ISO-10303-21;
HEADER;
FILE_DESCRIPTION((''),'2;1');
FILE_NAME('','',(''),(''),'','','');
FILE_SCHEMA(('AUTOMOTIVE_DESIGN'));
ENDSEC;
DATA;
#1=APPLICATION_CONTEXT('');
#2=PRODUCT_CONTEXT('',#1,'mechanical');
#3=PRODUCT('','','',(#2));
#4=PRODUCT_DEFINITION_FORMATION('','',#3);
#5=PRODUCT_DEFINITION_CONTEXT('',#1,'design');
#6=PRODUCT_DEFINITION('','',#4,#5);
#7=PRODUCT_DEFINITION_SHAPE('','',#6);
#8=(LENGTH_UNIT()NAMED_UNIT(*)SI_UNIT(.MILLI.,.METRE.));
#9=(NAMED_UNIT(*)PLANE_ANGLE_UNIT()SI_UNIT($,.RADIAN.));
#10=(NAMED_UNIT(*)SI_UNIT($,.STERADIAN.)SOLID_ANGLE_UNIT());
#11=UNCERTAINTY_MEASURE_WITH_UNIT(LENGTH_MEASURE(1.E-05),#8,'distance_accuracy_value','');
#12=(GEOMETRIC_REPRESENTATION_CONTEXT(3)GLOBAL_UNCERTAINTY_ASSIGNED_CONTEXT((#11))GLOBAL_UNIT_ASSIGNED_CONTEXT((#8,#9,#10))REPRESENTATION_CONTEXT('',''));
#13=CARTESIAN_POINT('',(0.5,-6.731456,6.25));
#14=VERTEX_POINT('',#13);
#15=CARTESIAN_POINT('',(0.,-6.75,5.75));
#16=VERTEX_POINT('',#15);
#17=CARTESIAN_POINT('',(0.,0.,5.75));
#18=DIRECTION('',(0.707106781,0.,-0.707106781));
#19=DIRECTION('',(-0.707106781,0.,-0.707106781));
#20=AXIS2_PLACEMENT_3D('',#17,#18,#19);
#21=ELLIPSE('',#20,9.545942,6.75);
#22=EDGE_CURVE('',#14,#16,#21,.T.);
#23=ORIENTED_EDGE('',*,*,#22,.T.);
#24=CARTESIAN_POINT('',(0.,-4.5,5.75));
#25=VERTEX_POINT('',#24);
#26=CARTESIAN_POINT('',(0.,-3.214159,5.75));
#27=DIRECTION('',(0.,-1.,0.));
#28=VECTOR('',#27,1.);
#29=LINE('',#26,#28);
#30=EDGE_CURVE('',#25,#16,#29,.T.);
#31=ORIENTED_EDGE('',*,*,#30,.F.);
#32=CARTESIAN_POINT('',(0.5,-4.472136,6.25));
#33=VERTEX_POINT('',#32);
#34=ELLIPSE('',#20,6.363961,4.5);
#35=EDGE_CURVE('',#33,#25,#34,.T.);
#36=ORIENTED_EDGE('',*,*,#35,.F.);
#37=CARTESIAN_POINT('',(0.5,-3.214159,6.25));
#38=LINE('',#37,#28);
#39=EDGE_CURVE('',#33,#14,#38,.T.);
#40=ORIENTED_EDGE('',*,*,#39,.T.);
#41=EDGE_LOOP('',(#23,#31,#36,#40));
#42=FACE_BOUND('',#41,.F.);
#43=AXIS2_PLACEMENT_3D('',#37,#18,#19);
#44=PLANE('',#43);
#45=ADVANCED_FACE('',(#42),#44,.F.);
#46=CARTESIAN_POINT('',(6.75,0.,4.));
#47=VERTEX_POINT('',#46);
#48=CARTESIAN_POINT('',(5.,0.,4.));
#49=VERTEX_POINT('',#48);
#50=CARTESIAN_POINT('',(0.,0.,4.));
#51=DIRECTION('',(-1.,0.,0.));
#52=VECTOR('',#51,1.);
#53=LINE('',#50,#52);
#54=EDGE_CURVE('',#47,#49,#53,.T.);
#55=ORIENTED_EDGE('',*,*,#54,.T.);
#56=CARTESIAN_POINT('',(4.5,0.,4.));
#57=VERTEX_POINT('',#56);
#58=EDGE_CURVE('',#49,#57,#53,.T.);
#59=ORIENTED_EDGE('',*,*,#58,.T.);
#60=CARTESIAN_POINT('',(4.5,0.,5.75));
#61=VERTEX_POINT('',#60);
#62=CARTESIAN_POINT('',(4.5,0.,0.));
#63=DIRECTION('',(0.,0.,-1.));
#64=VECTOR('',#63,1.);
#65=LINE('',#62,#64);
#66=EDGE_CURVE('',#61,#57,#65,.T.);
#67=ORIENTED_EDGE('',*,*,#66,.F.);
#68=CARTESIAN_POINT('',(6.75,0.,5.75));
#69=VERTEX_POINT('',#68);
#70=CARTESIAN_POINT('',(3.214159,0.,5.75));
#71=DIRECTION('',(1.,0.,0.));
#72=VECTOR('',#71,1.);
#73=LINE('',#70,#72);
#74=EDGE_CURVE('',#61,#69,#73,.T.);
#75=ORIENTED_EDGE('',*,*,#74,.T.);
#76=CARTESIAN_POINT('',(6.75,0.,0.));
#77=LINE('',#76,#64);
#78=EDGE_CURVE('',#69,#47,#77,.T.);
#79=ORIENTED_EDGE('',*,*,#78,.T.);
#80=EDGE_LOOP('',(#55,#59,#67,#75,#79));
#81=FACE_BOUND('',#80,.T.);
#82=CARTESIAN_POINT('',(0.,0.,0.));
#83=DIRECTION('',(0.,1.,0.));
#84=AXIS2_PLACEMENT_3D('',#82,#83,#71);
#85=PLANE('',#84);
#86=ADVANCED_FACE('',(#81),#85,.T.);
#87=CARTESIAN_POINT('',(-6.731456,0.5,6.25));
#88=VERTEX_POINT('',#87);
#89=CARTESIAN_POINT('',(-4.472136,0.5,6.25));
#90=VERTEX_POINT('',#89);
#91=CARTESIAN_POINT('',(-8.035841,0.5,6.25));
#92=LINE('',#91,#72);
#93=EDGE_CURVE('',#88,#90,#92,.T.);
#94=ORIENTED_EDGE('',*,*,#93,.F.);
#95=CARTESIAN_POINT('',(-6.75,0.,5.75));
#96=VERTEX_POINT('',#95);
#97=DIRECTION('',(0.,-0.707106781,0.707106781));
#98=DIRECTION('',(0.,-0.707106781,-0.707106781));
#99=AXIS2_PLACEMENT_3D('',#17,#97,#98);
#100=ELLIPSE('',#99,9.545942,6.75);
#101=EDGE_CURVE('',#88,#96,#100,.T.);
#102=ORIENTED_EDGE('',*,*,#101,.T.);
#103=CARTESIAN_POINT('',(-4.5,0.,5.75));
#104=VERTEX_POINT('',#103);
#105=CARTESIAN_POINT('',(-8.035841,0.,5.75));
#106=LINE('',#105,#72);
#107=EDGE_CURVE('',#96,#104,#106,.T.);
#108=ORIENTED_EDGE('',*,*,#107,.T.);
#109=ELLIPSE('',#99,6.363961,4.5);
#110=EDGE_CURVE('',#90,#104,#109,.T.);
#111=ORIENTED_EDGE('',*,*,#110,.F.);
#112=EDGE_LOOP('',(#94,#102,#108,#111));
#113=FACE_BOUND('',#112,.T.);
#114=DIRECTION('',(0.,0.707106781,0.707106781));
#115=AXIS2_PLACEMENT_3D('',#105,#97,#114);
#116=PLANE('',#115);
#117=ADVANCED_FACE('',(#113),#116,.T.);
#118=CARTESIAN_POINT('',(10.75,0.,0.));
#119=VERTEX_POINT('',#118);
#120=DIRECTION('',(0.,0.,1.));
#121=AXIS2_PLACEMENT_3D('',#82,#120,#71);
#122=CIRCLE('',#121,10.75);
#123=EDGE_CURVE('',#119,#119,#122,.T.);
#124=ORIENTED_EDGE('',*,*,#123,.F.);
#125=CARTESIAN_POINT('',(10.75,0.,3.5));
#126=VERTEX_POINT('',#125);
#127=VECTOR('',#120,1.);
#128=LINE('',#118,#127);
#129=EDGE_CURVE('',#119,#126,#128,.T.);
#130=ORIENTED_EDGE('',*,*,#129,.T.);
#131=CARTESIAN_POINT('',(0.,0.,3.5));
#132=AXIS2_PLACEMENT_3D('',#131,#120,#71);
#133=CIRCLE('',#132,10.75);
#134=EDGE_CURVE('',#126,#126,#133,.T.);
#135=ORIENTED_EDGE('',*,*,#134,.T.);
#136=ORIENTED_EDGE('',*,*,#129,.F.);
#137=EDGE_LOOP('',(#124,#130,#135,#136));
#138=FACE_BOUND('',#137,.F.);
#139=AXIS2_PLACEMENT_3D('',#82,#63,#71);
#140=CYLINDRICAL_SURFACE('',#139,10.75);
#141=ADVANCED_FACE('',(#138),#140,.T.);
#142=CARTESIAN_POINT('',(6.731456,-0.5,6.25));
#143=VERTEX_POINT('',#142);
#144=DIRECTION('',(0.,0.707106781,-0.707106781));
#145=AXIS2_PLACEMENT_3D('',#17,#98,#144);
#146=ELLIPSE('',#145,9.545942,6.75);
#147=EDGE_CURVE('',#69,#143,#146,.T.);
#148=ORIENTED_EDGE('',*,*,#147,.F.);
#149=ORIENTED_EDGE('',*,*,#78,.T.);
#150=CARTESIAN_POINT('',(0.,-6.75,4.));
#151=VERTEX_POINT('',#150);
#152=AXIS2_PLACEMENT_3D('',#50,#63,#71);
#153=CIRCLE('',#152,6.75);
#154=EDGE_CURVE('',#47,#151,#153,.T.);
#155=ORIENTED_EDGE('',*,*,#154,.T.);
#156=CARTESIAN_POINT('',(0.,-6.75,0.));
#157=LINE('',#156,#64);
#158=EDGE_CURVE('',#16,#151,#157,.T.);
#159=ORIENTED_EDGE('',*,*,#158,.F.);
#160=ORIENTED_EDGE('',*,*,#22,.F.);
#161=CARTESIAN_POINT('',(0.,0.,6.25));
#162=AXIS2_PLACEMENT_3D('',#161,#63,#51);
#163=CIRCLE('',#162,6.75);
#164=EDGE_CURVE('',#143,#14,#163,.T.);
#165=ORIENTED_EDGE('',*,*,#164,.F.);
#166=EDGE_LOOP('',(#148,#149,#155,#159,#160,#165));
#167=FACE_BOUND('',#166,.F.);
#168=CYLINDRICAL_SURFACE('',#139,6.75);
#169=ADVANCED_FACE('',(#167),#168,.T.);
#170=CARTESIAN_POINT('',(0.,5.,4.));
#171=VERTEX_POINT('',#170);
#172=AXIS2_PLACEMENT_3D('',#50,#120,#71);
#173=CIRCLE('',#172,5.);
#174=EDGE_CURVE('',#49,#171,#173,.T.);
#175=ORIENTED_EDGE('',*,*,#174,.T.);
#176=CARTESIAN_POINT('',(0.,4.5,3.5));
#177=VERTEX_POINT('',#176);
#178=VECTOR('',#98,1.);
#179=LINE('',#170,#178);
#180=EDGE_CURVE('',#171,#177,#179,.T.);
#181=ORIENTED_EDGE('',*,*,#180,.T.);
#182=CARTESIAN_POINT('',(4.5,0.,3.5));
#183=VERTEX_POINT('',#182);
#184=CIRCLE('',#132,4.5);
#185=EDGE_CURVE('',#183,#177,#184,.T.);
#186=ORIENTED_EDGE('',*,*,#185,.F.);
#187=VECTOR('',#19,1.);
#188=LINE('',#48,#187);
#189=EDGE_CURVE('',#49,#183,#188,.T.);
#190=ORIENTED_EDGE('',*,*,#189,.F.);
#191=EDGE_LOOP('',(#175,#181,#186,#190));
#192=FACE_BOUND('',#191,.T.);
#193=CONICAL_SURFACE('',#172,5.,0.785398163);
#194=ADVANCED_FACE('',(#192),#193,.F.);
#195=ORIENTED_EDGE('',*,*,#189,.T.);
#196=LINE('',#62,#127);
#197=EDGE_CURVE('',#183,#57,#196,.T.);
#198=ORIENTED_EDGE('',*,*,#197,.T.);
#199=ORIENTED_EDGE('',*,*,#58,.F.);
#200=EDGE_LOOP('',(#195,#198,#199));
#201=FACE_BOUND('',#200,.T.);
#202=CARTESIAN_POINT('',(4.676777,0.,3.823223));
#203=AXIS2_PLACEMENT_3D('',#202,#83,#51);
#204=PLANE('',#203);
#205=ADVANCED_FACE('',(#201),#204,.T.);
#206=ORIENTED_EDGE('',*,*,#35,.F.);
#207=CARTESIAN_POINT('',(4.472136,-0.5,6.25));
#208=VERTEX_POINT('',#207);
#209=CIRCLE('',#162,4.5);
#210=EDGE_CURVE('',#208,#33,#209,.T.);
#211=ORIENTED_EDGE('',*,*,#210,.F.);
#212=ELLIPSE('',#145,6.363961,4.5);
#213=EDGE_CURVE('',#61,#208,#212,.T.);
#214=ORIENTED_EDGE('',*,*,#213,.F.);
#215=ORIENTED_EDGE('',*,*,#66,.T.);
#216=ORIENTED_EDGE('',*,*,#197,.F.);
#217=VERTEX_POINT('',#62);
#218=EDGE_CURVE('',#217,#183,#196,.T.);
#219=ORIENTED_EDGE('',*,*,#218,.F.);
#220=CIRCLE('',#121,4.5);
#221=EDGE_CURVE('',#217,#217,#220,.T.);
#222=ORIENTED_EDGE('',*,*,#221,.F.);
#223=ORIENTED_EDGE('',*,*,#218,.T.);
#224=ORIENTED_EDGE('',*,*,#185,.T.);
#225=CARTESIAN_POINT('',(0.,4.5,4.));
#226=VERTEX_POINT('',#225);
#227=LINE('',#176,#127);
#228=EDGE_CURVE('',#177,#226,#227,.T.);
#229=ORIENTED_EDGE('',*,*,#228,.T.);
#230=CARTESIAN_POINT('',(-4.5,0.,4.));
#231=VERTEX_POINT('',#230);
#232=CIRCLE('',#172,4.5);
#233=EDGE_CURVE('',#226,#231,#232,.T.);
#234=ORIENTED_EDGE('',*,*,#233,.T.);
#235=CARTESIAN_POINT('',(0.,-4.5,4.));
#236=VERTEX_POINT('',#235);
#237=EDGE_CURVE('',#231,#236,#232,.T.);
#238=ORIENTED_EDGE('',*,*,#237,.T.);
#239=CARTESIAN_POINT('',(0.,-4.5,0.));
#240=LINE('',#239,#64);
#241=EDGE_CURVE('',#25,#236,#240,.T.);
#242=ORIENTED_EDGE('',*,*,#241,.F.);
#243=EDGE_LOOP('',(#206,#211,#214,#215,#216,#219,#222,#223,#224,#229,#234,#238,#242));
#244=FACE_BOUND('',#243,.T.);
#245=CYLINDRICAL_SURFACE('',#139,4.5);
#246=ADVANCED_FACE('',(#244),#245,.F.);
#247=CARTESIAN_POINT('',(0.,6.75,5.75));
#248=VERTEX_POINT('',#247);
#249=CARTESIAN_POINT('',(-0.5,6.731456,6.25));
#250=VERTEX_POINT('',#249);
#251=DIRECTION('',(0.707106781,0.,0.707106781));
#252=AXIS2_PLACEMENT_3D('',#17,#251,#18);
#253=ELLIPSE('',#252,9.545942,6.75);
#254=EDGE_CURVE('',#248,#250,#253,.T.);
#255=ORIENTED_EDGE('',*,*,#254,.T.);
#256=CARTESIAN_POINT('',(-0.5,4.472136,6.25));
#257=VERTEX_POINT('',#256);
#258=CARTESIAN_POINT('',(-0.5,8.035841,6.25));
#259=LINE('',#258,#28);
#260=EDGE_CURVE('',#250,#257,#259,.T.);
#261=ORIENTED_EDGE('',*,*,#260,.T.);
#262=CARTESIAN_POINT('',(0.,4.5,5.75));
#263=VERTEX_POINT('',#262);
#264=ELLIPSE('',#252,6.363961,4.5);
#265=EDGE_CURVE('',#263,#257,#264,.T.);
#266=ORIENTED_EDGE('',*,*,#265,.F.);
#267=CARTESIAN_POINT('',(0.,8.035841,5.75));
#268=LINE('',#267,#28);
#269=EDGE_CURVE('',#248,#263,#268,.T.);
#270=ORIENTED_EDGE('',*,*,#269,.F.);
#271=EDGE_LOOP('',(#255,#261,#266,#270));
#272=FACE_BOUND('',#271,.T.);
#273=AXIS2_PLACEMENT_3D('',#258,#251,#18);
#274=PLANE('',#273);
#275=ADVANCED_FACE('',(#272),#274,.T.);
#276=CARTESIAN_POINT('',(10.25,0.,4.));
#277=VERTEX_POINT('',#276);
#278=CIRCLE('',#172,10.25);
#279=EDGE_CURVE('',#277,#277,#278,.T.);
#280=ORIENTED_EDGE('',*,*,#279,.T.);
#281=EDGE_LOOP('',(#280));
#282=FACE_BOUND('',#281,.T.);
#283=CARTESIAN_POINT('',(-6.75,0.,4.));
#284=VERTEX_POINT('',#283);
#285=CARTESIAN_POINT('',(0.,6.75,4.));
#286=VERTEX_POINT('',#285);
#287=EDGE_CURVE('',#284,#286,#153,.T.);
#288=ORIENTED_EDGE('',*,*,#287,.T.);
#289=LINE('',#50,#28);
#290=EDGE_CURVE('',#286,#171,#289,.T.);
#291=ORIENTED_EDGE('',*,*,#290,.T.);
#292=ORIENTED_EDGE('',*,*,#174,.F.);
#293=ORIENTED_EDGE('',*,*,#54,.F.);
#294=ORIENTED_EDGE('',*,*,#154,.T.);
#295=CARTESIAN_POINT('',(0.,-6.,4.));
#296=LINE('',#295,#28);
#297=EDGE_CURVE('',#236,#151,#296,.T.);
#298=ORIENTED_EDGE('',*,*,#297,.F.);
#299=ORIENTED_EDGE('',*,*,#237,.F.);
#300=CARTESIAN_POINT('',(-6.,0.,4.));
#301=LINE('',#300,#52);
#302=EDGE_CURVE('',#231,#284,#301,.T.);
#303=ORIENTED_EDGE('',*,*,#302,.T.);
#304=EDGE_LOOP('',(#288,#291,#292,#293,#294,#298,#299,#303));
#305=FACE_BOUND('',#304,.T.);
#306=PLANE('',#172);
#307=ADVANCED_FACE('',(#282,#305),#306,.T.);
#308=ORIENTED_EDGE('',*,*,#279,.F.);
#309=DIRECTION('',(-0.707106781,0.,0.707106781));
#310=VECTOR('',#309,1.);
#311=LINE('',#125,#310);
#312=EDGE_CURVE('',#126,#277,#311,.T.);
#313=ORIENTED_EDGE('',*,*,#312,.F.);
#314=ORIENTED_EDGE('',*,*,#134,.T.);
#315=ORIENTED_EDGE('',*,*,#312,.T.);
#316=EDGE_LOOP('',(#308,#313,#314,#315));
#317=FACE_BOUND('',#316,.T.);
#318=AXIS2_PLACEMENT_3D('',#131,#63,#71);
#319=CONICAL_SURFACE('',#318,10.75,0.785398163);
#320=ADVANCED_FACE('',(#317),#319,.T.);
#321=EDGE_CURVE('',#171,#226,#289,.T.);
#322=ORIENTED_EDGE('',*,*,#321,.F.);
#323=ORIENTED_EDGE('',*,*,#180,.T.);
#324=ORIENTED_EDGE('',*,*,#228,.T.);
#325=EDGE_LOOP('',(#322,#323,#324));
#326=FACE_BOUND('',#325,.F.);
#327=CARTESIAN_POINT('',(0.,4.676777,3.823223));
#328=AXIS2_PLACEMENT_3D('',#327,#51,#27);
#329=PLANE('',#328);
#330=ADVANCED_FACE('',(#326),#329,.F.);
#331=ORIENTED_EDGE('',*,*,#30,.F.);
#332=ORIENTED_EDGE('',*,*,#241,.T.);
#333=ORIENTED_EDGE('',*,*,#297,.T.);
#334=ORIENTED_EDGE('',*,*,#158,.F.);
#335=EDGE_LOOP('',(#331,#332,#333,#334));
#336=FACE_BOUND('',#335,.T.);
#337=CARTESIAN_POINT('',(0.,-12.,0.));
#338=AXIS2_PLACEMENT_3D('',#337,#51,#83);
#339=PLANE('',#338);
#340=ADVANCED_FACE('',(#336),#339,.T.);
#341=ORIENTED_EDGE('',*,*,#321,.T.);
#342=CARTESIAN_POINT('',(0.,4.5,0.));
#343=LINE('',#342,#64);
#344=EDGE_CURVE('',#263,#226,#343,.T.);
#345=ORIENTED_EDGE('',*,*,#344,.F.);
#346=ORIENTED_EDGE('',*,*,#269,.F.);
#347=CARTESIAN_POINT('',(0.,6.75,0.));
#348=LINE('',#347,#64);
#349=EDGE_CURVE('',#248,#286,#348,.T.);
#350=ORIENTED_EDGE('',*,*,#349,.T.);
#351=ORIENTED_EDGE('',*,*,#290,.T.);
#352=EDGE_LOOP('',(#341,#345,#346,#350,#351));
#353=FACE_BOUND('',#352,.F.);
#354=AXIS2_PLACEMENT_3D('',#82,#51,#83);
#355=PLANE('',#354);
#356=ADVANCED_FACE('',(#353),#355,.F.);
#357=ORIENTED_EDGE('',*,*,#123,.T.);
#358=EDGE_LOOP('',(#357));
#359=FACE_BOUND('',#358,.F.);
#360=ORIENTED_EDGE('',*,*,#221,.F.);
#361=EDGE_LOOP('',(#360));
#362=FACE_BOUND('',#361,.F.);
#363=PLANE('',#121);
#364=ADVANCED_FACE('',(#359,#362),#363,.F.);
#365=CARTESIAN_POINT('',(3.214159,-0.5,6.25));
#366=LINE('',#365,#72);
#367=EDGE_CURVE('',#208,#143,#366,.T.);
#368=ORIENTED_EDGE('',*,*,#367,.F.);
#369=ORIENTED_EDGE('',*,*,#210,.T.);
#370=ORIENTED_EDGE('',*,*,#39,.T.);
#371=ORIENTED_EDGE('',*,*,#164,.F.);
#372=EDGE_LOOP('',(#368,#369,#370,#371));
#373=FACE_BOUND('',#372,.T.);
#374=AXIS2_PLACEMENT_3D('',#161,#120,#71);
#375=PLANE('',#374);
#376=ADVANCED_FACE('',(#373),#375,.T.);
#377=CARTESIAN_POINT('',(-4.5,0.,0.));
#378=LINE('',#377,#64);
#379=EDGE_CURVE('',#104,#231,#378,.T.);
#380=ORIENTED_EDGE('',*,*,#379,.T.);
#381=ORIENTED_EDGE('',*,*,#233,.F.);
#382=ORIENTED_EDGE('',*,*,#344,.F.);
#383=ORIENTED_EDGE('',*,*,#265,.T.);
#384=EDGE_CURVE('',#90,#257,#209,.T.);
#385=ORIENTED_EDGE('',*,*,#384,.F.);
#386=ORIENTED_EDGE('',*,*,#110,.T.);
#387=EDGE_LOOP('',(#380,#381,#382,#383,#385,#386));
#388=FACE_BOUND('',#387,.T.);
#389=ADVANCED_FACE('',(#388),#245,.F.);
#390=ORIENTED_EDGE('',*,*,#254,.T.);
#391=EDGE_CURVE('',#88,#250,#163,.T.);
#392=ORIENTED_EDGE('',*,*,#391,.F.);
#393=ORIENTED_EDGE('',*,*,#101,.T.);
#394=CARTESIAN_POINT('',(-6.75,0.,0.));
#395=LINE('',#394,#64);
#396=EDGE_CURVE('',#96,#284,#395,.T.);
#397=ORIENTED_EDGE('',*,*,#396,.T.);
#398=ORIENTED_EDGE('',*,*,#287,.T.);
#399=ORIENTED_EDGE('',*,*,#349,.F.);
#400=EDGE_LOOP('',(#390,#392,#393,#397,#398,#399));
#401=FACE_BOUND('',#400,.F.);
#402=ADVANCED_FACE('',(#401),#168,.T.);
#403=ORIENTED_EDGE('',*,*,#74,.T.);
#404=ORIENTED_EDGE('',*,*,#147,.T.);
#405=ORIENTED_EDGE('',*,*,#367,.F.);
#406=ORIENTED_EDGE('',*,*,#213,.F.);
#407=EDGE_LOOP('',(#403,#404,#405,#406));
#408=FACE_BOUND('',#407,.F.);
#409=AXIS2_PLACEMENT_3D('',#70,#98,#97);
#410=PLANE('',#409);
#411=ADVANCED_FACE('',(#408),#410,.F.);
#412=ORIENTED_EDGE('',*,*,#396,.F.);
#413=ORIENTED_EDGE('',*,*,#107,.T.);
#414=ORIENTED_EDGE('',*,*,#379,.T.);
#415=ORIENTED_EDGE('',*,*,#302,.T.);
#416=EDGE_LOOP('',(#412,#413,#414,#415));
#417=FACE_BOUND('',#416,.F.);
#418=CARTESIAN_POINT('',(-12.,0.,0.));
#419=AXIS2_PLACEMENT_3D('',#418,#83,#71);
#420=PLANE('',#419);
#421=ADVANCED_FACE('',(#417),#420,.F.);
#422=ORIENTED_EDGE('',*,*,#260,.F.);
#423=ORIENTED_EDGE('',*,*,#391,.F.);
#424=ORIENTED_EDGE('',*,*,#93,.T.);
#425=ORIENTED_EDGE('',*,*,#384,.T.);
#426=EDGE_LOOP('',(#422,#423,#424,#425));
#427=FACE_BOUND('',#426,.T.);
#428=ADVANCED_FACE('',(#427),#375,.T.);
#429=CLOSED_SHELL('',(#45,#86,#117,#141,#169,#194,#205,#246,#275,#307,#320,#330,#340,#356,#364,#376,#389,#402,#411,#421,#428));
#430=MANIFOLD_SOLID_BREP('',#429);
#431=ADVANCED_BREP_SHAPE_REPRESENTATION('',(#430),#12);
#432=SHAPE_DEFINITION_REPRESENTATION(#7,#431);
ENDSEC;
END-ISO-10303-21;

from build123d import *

# Parameters (mm, degrees)
F0_R         = 10.75
F0_R_2       = 4.5
F1_DEPTH     = 4
F2_R         = 6.75
F2_R_2       = 4.5
F3_DEPTH     = 6.25
F4_W         = 12
F4_H         = 12
F5_DEPTH     = 10
F8_T1_DEPTH  = 4.821682988
F8_T3_DEPTH  = 4.821682988
F8_T5_DEPTH  = 4.821682988
F8_T7_DEPTH  = 4.821682988
F8_T12_ANGLE = 90


# Not quite as in the source:
# - a fillet or chamfer that OpenCascade refuses, or shapes differently, is made with other operations: its cross-section is extruded or revolved along the edge and cut away or added


with BuildPart() as f1:
    # F0 (on Top) → F1 (new body)
    with BuildSketch(Plane.XY):
        Circle(F0_R)
        Circle(F0_R_2, mode=Mode.SUBTRACT)
    extrude(amount=F1_DEPTH)


with BuildPart() as f3:
    # F2 (on Top) → F3 (new body)
    with BuildSketch(Plane.XY):
        Circle(F2_R)
        Circle(F2_R_2, mode=Mode.SUBTRACT)
    extrude(amount=F3_DEPTH)


with BuildPart() as f5:
    # F4 (on Top) → F5 (new body)
    with BuildSketch(Plane.XY):
        with Locations((6, 6)):
            Rectangle(F4_W, F4_H)
    extrude(amount=F5_DEPTH)


with BuildPart() as f5b:
    # F4 (on Top) → F5, piece 2 (new body)
    with BuildSketch(Plane.XY):
        with Locations((-6, -6)):
            Rectangle(F4_W, F4_H)
    extrude(amount=F5_DEPTH)


with BuildPart() as f3_1:
    add(f3.part)

    # F6: cut F5b, F5
    add(f5b.part, mode=Mode.SUBTRACT)
    add(f5.part, mode=Mode.SUBTRACT)


with BuildPart() as f1_1:
    add(f1.part)

    # F7: union F3
    add(f3_1.part)

    # F8: chamfer of 0.5 on 6 edges, made by hand

    # F8_s2 → F8_t1 (cut)
    with BuildSketch(Plane.YZ.offset(-8.035841494)):
        Polygon((0, 5.75), (0.5, 6.25), (0, 6.25), align=None)
    extrude(amount=F8_T1_DEPTH, mode=Mode.SUBTRACT)

    # F8_s4 → F8_t3 (cut)
    with BuildSketch(Plane.XZ.offset(-8.035841494)):
        Polygon((-0.5, 6.25), (0, 5.75), (0, 6.25), align=None)
    extrude(amount=F8_T3_DEPTH, mode=Mode.SUBTRACT)

    # F8_s6 → F8_t5 (cut)
    with BuildSketch(Plane.XZ.offset(3.214158506)):
        Polygon((0.5, 6.25), (0, 5.75), (0, 6.25), align=None)
    extrude(amount=F8_T5_DEPTH, mode=Mode.SUBTRACT)

    # F8_s8 → F8_t7 (cut)
    with BuildSketch(Plane.YZ.offset(3.214158506)):
        Polygon((0, 5.75), (-0.5, 6.25), (0, 6.25), align=None)
    extrude(amount=F8_T7_DEPTH, mode=Mode.SUBTRACT)

    # F8_s9 → F8_t10 (revolve, cut)
    with BuildSketch(Plane.XZ):
        Polygon((10.75, 3.5), (10.25, 4), (10.75, 4), align=None)
    revolve(axis=Axis((0, 0, 4), (0, 0, 1)), mode=Mode.SUBTRACT)

    # F8_s11 → F8_t12 (revolve, cut)
    with BuildSketch(Plane.XZ):
        Polygon((5, 4), (4.5, 3.5), (4.5, 4), align=None)
    revolve(axis=Axis((0, 0, 4), (0, 0, 1)), revolution_arc=F8_T12_ANGLE, mode=Mode.SUBTRACT)


solid = f1_1.part
